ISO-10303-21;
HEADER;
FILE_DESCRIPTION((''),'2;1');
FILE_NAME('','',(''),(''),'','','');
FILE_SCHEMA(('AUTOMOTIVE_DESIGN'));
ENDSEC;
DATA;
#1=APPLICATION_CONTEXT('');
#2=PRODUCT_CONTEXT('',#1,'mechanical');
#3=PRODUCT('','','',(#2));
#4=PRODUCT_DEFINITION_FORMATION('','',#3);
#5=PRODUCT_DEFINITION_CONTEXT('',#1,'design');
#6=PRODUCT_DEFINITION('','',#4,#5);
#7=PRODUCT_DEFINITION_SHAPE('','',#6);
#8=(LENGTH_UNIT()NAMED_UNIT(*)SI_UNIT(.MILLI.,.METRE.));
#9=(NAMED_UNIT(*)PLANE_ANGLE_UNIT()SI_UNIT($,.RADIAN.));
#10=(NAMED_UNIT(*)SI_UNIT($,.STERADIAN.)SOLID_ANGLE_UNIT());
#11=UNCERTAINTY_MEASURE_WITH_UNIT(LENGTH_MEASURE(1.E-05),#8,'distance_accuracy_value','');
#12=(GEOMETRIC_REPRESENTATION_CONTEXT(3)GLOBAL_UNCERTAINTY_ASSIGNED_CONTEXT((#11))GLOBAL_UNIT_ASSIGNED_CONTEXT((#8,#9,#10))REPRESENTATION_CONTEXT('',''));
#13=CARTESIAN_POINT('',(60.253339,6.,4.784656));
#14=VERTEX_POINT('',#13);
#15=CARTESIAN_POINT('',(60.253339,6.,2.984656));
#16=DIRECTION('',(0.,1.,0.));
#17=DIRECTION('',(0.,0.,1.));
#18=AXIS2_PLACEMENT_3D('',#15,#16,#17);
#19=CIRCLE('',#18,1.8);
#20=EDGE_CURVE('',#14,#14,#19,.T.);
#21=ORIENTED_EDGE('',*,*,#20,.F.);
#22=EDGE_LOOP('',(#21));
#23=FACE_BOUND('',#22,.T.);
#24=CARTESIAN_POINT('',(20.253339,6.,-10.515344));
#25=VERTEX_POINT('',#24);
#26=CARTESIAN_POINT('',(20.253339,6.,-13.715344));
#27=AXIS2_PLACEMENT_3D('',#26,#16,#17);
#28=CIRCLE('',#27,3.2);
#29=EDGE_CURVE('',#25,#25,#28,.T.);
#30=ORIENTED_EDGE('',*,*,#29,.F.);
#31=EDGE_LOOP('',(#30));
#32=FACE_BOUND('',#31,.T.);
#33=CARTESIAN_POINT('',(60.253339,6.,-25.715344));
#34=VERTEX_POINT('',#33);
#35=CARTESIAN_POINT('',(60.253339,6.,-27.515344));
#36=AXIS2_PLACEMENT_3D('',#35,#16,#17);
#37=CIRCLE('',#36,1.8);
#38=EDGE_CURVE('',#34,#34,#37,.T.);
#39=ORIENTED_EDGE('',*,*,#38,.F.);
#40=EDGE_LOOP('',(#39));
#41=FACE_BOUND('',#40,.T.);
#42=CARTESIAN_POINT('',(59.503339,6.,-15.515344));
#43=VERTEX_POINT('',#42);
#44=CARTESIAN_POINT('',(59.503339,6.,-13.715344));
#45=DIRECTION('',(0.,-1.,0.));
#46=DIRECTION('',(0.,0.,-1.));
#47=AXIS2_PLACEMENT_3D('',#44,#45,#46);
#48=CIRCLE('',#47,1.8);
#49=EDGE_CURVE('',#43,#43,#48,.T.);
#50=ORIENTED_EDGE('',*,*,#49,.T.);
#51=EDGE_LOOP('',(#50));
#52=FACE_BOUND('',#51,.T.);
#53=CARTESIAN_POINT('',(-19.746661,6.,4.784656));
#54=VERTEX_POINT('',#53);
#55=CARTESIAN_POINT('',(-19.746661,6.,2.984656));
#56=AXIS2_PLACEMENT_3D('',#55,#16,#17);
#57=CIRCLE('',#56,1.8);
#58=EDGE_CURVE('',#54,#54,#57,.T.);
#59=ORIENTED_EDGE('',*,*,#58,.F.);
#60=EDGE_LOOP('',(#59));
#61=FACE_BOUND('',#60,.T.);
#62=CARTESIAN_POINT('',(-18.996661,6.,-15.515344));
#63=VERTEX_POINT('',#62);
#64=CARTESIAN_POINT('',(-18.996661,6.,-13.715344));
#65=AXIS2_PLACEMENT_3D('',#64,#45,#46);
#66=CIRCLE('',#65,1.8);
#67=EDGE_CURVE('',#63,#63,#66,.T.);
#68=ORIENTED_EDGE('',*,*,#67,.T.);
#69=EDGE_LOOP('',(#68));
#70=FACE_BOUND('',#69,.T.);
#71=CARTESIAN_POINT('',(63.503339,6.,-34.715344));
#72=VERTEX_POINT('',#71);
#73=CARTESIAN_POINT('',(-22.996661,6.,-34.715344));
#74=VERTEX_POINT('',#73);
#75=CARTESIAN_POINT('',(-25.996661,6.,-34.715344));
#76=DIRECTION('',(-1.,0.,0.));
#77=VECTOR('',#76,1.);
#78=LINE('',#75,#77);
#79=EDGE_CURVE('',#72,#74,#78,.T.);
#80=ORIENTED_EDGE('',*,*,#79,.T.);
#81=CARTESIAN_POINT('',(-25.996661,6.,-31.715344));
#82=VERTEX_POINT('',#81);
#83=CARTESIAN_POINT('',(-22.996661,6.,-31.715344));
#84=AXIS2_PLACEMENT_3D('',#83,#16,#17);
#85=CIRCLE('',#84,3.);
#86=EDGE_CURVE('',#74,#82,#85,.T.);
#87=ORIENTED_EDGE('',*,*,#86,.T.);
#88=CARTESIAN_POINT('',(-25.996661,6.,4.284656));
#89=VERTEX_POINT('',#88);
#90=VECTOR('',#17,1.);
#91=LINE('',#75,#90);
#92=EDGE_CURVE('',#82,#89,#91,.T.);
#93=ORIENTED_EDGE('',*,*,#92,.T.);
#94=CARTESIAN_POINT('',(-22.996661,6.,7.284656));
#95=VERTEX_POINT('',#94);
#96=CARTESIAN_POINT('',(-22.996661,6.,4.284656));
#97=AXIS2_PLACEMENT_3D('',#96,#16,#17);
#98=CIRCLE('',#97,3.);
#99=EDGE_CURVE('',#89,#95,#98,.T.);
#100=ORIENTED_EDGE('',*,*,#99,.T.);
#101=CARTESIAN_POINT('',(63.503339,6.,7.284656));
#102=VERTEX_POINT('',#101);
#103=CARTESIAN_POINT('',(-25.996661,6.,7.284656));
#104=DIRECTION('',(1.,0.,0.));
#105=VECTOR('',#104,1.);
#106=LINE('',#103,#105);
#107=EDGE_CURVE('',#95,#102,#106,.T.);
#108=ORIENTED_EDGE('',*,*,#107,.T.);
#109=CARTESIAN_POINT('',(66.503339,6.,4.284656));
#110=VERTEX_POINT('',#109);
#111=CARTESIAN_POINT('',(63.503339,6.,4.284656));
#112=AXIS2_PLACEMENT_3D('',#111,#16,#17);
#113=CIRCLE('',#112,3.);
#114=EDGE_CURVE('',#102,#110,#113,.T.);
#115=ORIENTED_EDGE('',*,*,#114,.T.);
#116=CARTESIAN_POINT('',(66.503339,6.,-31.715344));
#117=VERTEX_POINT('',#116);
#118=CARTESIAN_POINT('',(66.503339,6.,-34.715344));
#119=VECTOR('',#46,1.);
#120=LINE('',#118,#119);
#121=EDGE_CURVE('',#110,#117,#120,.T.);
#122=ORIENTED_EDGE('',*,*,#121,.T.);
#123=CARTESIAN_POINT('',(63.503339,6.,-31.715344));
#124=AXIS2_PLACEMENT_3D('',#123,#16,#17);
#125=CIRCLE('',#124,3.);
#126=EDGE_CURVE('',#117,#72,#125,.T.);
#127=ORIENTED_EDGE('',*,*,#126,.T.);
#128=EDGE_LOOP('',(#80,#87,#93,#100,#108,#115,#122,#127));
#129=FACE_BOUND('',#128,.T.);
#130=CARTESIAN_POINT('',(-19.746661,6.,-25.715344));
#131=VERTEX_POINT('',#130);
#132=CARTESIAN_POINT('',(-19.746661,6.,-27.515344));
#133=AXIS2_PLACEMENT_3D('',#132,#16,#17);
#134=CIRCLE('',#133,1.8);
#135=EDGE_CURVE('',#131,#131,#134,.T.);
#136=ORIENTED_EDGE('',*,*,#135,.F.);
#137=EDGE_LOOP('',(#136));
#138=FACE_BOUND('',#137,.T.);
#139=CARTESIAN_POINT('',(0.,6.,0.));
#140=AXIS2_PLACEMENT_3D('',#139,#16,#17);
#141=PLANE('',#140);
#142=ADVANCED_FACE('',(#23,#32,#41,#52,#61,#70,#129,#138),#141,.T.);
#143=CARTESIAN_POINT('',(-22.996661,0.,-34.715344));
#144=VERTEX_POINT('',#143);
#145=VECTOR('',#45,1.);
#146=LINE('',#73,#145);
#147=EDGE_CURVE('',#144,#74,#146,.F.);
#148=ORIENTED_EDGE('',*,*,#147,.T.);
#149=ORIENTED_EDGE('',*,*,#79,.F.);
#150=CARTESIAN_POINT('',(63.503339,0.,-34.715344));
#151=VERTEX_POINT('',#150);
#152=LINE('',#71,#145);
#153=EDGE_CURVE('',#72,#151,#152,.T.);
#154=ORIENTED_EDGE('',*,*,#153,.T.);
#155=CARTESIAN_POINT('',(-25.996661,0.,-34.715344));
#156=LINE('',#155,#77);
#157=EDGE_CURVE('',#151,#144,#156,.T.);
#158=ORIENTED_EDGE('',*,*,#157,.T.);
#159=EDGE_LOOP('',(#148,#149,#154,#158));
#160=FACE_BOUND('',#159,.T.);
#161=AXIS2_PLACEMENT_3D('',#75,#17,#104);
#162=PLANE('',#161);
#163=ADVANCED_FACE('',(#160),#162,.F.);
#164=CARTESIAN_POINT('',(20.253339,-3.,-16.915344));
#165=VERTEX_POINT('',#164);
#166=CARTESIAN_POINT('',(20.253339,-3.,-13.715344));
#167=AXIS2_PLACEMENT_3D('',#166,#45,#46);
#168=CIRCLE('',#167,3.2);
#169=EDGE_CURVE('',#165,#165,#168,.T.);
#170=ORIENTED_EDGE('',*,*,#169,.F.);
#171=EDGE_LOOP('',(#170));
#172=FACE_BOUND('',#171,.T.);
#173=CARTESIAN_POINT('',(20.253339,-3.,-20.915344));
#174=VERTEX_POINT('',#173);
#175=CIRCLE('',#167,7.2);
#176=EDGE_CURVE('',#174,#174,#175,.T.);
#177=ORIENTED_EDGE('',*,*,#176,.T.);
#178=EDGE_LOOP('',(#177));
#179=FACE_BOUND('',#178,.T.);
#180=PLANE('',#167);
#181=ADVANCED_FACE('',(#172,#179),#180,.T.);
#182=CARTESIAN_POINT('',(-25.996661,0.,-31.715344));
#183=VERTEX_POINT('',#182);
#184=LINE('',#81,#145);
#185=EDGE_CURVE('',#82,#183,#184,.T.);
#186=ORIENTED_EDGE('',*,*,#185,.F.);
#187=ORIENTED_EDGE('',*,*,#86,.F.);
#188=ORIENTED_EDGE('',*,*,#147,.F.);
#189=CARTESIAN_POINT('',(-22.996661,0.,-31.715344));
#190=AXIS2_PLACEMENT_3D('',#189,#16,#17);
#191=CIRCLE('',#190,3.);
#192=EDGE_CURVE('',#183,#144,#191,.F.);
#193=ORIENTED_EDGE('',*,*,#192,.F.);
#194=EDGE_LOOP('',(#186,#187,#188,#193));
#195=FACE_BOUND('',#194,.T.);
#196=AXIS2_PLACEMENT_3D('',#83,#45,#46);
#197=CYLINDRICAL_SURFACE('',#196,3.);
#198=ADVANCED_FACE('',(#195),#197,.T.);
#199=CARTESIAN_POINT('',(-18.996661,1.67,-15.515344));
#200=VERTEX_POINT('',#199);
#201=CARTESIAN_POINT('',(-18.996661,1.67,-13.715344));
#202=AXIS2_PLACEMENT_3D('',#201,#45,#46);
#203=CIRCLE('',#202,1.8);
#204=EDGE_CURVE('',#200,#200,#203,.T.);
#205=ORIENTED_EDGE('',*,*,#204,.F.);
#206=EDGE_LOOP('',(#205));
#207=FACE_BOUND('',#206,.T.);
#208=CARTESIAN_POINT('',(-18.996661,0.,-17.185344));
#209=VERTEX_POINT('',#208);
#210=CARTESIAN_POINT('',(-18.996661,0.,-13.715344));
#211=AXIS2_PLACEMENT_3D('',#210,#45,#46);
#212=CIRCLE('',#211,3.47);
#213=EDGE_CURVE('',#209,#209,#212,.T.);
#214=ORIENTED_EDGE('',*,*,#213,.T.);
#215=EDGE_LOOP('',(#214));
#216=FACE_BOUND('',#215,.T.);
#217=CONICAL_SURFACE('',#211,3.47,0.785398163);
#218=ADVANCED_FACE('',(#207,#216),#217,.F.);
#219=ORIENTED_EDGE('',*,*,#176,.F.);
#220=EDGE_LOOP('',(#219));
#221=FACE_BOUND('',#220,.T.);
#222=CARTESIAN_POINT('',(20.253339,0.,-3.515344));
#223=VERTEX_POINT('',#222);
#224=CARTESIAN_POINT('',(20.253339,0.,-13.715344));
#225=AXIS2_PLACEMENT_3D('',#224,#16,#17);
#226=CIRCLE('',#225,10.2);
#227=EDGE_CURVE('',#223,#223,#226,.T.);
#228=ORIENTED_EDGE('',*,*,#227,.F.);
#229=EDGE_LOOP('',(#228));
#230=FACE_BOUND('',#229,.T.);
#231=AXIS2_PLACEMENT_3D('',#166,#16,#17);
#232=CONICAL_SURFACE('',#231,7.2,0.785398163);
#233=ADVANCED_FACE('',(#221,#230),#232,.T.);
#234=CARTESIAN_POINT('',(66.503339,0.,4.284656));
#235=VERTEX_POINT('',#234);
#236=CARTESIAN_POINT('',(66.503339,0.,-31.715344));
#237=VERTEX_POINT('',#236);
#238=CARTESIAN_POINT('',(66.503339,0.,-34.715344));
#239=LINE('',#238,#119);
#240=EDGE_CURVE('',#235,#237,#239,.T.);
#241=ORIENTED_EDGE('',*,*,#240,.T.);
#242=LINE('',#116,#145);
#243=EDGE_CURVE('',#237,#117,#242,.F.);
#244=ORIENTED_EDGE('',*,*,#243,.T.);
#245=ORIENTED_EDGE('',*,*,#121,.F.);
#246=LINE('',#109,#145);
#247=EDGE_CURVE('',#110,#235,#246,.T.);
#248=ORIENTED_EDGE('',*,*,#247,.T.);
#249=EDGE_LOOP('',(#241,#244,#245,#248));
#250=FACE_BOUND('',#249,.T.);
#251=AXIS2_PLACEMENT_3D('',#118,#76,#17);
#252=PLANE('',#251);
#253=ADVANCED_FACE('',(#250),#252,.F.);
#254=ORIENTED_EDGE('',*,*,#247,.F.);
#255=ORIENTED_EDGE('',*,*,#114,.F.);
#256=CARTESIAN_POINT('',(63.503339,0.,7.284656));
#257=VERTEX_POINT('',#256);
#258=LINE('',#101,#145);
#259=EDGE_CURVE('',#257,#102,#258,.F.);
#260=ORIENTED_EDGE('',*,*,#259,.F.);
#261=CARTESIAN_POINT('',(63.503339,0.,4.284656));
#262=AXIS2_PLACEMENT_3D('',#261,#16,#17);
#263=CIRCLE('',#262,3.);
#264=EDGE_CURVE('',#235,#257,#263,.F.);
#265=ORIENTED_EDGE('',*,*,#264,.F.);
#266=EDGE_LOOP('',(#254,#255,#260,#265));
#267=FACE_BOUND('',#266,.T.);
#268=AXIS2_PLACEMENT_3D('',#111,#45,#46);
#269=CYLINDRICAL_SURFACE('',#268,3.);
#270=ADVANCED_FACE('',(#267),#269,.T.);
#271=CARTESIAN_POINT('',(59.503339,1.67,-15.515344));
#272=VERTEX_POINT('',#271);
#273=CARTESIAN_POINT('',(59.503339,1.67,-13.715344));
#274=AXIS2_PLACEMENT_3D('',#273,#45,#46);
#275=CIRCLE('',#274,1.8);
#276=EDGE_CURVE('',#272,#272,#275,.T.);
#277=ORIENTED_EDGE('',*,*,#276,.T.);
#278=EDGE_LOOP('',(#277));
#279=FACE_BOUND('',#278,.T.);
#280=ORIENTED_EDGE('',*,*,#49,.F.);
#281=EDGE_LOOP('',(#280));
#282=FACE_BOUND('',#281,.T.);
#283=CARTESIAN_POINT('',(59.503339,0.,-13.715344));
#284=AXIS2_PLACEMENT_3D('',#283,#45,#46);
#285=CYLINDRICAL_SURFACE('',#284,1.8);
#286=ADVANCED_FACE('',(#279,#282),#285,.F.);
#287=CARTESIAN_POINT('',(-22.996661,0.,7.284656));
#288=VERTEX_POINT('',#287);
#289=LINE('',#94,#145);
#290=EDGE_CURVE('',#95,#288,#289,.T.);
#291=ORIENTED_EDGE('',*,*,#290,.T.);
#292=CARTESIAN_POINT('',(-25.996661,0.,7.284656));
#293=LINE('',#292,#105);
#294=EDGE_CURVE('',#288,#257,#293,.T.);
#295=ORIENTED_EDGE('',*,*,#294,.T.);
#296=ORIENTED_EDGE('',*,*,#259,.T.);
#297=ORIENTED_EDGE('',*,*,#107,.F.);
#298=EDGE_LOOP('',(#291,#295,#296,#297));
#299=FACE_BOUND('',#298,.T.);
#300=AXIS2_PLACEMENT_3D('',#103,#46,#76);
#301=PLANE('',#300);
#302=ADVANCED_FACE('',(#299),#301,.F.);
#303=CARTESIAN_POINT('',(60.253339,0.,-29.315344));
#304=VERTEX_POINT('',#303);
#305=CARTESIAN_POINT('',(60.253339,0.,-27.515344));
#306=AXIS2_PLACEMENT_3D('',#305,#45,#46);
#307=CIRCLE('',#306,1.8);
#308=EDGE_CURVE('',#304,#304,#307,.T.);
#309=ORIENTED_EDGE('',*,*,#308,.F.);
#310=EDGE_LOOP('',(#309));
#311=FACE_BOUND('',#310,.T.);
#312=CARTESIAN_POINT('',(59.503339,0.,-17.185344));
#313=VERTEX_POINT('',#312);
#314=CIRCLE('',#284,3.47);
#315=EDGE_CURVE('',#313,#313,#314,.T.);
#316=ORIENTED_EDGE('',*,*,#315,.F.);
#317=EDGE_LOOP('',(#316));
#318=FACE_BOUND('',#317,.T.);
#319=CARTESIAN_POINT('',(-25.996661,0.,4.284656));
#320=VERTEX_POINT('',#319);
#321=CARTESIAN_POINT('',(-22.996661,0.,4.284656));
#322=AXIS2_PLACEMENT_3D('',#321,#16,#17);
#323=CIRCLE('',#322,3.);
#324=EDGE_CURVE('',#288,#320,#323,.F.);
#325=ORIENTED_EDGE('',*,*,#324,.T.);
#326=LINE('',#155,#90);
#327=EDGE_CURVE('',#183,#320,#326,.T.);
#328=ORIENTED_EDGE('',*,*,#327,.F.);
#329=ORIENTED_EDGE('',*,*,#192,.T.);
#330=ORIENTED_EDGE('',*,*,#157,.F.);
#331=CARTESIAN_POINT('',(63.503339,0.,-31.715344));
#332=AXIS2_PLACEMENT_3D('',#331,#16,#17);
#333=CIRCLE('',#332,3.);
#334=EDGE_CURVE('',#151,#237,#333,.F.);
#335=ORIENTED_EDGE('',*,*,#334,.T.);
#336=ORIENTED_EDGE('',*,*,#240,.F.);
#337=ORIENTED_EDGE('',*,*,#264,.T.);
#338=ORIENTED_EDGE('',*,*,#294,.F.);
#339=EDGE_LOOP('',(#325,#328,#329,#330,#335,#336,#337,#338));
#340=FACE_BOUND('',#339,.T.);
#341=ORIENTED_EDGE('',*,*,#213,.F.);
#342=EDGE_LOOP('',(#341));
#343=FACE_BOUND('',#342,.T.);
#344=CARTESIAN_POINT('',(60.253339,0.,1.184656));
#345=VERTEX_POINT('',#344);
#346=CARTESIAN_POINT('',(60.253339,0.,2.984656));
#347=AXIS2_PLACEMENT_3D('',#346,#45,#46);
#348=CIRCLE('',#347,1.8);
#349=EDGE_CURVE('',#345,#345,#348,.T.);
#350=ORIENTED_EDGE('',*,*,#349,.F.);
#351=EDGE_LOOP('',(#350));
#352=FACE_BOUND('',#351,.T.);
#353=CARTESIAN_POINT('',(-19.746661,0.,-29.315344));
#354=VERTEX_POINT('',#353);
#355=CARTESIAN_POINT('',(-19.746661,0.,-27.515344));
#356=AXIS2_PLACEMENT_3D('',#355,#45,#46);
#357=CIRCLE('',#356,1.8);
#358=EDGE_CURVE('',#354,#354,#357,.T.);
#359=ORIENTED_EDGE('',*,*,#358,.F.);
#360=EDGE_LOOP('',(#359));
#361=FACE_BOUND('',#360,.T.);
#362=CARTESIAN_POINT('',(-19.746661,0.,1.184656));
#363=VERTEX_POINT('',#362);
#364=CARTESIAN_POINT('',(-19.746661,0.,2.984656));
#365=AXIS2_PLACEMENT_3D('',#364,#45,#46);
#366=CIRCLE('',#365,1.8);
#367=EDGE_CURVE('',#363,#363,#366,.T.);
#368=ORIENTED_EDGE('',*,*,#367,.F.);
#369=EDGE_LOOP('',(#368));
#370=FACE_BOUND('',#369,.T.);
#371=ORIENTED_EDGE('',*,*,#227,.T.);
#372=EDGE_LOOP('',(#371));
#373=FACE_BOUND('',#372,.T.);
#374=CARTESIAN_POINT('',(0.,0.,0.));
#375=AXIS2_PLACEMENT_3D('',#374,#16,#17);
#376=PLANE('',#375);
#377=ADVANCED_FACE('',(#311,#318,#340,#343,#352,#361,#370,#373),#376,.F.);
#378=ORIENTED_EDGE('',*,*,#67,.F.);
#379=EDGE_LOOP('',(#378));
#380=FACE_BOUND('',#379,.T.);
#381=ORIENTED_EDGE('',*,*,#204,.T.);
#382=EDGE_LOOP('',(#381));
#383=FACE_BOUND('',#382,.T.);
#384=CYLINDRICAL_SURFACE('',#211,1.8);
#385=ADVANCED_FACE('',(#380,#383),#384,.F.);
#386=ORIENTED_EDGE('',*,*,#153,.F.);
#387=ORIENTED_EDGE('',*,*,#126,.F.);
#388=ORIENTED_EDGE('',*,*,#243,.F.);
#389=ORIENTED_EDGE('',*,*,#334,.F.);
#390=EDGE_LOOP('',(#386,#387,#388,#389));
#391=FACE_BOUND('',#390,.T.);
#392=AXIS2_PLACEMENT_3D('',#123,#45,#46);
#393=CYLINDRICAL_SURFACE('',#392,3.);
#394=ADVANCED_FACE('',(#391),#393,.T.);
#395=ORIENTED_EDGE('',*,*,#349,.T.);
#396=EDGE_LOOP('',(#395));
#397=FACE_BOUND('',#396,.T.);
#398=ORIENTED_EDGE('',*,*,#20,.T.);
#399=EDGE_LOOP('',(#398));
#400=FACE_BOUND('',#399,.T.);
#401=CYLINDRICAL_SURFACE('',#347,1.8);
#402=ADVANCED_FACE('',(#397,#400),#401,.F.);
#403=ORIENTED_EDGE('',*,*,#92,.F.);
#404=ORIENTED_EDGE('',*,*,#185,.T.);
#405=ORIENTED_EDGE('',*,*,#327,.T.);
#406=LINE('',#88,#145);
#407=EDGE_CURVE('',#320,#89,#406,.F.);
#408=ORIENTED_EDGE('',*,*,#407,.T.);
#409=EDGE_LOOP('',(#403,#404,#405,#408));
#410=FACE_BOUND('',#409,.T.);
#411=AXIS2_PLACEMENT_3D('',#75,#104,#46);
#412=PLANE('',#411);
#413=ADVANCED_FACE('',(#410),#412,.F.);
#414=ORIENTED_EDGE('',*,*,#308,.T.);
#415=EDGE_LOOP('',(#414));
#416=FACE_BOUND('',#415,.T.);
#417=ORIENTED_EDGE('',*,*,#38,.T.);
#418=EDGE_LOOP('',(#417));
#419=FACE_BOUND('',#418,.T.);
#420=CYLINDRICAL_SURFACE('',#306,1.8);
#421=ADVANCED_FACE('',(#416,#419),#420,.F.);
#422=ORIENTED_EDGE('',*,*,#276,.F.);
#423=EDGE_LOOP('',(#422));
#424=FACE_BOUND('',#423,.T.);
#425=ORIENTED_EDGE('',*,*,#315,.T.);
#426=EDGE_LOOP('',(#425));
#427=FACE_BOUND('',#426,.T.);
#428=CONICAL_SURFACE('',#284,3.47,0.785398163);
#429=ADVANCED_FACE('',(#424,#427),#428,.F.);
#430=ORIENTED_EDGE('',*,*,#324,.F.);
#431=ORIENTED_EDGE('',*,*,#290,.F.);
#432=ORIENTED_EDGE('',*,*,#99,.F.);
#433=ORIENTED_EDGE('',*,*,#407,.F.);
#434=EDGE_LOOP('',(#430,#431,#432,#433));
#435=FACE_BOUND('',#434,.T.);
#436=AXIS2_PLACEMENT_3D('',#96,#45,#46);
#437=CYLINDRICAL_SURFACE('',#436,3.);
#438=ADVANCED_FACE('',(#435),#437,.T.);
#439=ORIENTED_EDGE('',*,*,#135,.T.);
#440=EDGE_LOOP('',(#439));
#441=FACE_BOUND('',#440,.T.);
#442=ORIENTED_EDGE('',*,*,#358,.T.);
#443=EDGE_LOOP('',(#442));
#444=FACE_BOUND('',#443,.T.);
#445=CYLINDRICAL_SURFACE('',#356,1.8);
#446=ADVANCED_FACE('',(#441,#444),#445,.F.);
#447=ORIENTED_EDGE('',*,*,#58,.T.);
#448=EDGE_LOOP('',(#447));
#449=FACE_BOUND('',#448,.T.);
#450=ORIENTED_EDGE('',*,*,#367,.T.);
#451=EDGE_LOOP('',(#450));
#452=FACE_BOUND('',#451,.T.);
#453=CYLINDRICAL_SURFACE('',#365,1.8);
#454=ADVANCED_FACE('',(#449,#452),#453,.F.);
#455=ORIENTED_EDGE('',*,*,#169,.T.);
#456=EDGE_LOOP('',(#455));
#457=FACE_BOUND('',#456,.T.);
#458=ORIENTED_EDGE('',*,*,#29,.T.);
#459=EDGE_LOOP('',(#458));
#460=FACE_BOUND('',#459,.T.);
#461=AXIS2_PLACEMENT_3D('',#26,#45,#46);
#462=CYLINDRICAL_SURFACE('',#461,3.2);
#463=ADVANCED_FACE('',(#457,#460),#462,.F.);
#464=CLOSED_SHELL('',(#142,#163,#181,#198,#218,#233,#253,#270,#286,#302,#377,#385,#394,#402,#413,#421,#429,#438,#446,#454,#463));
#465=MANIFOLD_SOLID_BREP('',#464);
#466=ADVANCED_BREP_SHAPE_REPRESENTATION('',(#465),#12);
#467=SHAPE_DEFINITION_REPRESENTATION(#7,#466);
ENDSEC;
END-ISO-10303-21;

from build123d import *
from build123d.topology import SkipClean

# Parameters (mm, degrees)
SKETCH2_W                                            = 92.5
SKETCH2_H                                            = 42
SKETCH2_R                                            = 3.2
BOSS_EXTRUDE1_DEPTH                                  = 6
M3_CLEARANCE_HOLE1_D                                 = 3.6
M3_CLEARANCE_HOLE1_DEPTH                             = 10
M3_CLEARANCE_HOLE1_TIP                               = 1.081549114
BOSS_EXTRUDE2_START                                  = 3
SKETCH7_R                                            = 7.2
SKETCH7_R_2                                          = 3.2
BOSS_EXTRUDE2_DEPTH                                  = 3
CHAMFER1_SIZE                                        = 3
FILLET1_R                                            = 3
CSK_FOR_M3_HEX_SOCKET_COUNTERSUNK_HEAD_S_D           = 3.6
CSK_FOR_M3_HEX_SOCKET_COUNTERSUNK_HEAD_S_CSINK_D     = 6.94
CSK_FOR_M3_HEX_SOCKET_COUNTERSUNK_HEAD_S_CSINK_ANGLE = 90


with BuildPart() as part:
    # Sketch2 → Boss-Extrude1 (new body)
    with BuildSketch(Plane(origin=(0, 0, 0), x_dir=(1, 0, 0), z_dir=(0, 1, 0))):
        with Locations((20.253338886, 13.715343577)):
            Rectangle(SKETCH2_W, SKETCH2_H)
        with Locations(Location((20.253338886, 13.715343577, 0), (0, 0, 270))):
            Circle(SKETCH2_R, mode=Mode.SUBTRACT)
    extrude(amount=BOSS_EXTRUDE1_DEPTH)

    # M3 Clearance Hole1
    with Locations(Plane(origin=(0, 0, 0), x_dir=(-1, 0, 0), z_dir=(0, -1, 0))):
        with Locations((-60.253338886, 27.515343577), (-60.253338886, -2.984656423), (19.746661114, -2.984656423), (19.746661114, 27.515343577)):
            Hole(M3_CLEARANCE_HOLE1_D / 2, depth=M3_CLEARANCE_HOLE1_DEPTH)
            with Locations((0, 0, -(M3_CLEARANCE_HOLE1_DEPTH + M3_CLEARANCE_HOLE1_TIP / 2))):  # 118° drill point
                Cone(0, M3_CLEARANCE_HOLE1_D / 2, M3_CLEARANCE_HOLE1_TIP, mode=Mode.SUBTRACT)

    # Sketch7 → Boss-Extrude2 (add)
    with SkipClean():  # the faces are left unmerged after this step: merging them gives an invalid solid
        with BuildSketch(Plane.XZ.offset(BOSS_EXTRUDE2_START)):
            with Locations(Location((20.253338886, -13.715343577, 0), (0, 0, 90))):
                Circle(SKETCH7_R)
            with Locations(Location((20.253338886, -13.715343577, 0), (0, 0, 270))):
                Circle(SKETCH7_R_2, mode=Mode.SUBTRACT)
        extrude(amount=-BOSS_EXTRUDE2_DEPTH)

    # Chamfer1
    chamfer1_edges = [part.edges().sort_by_distance(p)[0] for p in [
        (20.253338886, 0, -20.915343577),
    ]]
    chamfer(chamfer1_edges, length=CHAMFER1_SIZE - 0.0001)  # a hair under: the kernel refuses the full size

    # Fillet1
    fillet1_edges = [part.edges().sort_by_distance(p)[0] for p in [
        (-25.996661114, 3, -34.715343577),
        (66.503338886, 3, -34.715343577),
        (66.503338886, 3, 7.284656423),
        (-25.996661114, 3, 7.284656423),
    ]]
    fillet(fillet1_edges, radius=FILLET1_R)

    # CSK for M3 Hex Socket Countersunk Head Screw1 (through all)
    with Locations(Plane(origin=(0, 0, 0), x_dir=(-1, 0, 0), z_dir=(0, -1, 0))):
        with Locations((-59.503338886, 13.715343577), (18.996661114, 13.715343577)):
            CounterSinkHole(CSK_FOR_M3_HEX_SOCKET_COUNTERSUNK_HEAD_S_D / 2, CSK_FOR_M3_HEX_SOCKET_COUNTERSUNK_HEAD_S_CSINK_D / 2, counter_sink_angle=CSK_FOR_M3_HEX_SOCKET_COUNTERSUNK_HEAD_S_CSINK_ANGLE)


solid = part.part
